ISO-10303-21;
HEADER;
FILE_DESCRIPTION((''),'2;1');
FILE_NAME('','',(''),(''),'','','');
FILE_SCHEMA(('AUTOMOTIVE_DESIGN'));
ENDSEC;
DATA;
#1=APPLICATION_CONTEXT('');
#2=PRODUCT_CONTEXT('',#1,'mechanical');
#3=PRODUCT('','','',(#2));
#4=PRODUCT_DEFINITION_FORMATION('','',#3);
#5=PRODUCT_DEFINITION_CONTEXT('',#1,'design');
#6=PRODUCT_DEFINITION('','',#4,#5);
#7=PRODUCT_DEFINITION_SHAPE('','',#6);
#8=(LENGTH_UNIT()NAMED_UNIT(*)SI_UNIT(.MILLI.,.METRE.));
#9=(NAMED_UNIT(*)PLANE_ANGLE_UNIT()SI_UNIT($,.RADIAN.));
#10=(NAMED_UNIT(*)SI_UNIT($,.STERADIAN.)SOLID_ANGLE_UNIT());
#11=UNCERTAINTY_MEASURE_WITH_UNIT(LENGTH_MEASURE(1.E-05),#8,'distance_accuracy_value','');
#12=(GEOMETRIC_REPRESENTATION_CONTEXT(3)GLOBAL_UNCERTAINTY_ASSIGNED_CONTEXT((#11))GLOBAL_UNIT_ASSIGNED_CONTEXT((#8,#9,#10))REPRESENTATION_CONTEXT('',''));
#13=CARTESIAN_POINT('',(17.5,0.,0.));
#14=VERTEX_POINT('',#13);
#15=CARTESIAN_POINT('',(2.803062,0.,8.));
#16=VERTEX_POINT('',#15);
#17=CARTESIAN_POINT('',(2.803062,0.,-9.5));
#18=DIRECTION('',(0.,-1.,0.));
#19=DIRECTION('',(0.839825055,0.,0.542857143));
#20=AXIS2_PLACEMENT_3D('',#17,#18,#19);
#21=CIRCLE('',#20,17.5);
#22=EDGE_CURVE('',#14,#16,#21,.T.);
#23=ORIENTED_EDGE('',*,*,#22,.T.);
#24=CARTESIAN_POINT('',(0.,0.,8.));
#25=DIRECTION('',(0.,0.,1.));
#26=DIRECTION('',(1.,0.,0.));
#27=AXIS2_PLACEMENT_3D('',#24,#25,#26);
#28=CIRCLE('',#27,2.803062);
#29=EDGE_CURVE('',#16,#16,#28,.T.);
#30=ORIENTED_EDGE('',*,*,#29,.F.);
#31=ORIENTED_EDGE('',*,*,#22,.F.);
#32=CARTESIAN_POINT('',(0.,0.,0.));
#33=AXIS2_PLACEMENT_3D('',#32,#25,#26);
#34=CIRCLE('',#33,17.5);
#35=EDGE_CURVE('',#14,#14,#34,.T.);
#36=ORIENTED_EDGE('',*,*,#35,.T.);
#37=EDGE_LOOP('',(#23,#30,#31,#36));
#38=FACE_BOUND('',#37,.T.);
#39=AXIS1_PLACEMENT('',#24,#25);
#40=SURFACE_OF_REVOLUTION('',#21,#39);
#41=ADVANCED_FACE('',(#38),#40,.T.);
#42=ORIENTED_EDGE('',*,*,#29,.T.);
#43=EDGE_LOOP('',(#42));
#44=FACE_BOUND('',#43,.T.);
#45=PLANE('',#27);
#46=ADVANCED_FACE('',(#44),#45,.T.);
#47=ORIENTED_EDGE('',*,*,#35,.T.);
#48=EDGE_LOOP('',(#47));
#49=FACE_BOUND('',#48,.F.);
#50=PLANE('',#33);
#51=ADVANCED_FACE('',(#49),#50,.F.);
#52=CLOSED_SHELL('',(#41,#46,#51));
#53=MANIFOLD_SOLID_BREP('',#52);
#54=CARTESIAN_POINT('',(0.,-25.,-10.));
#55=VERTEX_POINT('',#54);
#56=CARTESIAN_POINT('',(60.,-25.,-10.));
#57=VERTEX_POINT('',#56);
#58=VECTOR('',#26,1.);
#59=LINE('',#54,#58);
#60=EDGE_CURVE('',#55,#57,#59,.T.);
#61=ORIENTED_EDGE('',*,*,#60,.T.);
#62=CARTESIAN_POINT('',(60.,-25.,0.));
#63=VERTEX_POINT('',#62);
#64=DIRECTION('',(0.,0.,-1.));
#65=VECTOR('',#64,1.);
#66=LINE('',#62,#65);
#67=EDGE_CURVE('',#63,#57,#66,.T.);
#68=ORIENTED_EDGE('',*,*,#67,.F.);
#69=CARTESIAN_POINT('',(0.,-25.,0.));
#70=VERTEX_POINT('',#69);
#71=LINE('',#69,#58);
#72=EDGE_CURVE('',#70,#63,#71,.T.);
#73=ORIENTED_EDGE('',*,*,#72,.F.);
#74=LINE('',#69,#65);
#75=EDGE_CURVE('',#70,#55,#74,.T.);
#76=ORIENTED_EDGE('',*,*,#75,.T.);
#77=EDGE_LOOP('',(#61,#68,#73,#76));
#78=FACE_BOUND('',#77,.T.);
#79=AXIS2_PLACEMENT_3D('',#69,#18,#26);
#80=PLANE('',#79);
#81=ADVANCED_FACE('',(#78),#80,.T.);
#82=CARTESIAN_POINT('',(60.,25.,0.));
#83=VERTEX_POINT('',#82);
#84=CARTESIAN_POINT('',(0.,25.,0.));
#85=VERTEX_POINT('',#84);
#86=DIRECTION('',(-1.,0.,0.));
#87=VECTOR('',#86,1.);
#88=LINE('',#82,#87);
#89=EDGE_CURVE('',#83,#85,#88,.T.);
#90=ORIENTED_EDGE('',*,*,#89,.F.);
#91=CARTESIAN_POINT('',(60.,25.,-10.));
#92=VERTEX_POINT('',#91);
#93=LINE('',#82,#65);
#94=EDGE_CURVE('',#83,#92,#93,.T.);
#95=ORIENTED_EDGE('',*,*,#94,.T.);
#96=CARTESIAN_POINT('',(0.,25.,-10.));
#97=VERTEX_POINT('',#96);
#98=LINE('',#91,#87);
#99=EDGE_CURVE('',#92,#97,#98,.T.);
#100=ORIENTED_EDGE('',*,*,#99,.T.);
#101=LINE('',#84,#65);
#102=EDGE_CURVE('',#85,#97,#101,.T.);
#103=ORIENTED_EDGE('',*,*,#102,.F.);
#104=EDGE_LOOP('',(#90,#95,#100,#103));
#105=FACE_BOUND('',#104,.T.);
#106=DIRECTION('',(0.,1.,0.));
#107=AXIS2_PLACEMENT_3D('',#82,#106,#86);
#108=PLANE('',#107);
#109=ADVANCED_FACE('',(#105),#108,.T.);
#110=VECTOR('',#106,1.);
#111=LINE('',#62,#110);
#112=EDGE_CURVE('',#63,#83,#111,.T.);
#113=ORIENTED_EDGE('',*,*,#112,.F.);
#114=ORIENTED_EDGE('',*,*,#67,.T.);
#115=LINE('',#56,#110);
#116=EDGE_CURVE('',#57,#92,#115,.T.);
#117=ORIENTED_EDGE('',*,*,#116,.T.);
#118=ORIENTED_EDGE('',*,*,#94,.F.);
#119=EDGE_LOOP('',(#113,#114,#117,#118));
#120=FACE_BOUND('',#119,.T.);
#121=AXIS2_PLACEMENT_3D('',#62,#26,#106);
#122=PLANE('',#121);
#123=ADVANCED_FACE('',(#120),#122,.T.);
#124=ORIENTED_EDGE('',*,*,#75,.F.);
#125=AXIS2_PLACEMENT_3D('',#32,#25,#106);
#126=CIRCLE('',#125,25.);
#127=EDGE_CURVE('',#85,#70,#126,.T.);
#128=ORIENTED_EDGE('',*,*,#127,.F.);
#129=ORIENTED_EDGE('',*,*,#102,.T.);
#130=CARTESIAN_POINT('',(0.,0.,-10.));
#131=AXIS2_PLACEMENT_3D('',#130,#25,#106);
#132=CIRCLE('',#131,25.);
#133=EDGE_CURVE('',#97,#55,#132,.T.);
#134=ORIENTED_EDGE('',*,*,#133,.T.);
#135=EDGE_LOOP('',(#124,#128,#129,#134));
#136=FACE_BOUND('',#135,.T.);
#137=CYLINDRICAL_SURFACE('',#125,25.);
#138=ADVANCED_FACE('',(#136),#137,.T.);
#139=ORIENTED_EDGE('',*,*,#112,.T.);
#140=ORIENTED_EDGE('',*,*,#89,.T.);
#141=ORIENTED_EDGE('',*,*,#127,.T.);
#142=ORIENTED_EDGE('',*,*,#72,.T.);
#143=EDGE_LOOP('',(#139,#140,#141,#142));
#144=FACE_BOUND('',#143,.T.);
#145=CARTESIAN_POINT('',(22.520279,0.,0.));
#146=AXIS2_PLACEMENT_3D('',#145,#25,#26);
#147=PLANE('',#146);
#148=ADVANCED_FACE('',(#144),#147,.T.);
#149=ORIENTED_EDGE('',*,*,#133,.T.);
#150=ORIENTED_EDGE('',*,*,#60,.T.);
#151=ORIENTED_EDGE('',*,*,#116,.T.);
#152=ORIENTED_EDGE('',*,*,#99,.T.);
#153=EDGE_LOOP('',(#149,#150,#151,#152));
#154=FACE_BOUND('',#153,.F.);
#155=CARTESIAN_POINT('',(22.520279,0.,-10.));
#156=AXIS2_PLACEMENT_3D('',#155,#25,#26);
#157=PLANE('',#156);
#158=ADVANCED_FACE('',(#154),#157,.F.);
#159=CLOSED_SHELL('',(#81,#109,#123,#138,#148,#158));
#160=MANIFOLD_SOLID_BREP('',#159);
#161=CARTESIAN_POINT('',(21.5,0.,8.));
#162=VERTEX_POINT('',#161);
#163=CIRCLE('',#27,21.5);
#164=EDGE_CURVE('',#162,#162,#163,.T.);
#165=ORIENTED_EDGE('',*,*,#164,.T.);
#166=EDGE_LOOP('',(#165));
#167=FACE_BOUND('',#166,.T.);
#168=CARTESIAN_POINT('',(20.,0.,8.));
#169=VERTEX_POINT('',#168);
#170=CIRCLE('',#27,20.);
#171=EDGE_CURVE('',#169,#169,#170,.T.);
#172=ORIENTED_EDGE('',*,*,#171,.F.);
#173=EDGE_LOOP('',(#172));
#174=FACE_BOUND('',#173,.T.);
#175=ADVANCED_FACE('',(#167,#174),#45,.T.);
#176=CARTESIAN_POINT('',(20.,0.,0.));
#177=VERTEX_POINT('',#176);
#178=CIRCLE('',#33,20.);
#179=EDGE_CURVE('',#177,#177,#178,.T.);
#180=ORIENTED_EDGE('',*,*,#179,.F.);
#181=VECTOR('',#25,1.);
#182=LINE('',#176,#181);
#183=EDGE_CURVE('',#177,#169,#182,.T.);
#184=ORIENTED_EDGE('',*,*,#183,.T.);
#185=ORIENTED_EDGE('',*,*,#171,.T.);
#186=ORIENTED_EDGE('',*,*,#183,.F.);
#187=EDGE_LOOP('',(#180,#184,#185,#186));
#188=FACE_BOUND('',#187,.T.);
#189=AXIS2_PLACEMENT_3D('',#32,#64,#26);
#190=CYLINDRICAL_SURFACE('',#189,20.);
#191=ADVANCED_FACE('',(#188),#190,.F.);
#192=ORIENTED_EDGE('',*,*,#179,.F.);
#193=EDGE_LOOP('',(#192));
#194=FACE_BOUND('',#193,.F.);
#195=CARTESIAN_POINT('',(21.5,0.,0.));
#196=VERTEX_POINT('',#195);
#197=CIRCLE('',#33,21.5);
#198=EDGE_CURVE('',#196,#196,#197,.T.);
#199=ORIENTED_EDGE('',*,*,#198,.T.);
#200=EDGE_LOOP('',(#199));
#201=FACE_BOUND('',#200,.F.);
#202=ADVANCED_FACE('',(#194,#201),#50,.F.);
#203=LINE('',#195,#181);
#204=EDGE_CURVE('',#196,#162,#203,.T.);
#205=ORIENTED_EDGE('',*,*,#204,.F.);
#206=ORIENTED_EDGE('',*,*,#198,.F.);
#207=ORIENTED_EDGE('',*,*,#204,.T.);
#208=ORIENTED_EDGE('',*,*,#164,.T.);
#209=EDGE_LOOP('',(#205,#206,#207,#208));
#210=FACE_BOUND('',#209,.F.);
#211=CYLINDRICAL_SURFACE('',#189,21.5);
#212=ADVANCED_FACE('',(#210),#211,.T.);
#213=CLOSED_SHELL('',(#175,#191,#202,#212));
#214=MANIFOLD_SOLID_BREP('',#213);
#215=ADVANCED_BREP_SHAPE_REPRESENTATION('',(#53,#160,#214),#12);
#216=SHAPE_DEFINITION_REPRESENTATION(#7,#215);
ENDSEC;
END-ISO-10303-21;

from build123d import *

# Parameters (mm, degrees)
F0_R     = 21.5
F0_R_2   = 20
F0_R_3   = 17.5
F1_DEPTH = 10
F2_DEPTH = 8
F3_DEPTH = 8


# Not quite as in the source:
# - a fillet or chamfer that OpenCascade refuses, or shapes differently, is made with other operations: its cross-section is extruded or revolved along the edge and cut away or added


with BuildPart() as f1:
    # F0 (on Top) → F1 (new body)
    with BuildSketch(Plane.XY):
        with BuildLine():
            Line((60, 25), (0, 25))
            ThreePointArc((0, 25), (-25, 0), (0, -25))
            Line((0, -25), (60, -25))
            Line((60, -25), (60, 25))
        make_face()
        Circle(F0_R, mode=Mode.SUBTRACT)
        Circle(F0_R)
        Circle(F0_R_2, mode=Mode.SUBTRACT)
        Circle(F0_R_2)
        Circle(F0_R_3, mode=Mode.SUBTRACT)
        Circle(F0_R_3)
    extrude(amount=-F1_DEPTH)


with BuildPart() as f2:
    # F0 (on Top) → F2 (new body)
    with BuildSketch(Plane.XY):
        Circle(F0_R)
        Circle(F0_R_2, mode=Mode.SUBTRACT)
    extrude(amount=F2_DEPTH)


with BuildPart() as f3:
    # F0 (on Top) → F3 (new body)
    with BuildSketch(Plane.XY):
        Circle(F0_R_3)
    extrude(amount=F3_DEPTH)

    # F4: fillet of radius 17.5 on 1 edges, made by hand

    # F4_s1 → F4_t2 (revolve, cut)
    with BuildSketch(Plane.XZ):
        with BuildLine():
            ThreePointArc((17.5, 0), (11.1696618086, 5.8704261489), (2.8030615433, 8))
            Line((2.8030615433, 8), (17.5, 8))
            Line((17.5, 8), (17.5, 0))
        make_face()
    revolve(axis=Axis((0, 0, 8), (0, 0, 1)), mode=Mode.SUBTRACT)


solid = Compound([f1.part, f2.part, f3.part])
